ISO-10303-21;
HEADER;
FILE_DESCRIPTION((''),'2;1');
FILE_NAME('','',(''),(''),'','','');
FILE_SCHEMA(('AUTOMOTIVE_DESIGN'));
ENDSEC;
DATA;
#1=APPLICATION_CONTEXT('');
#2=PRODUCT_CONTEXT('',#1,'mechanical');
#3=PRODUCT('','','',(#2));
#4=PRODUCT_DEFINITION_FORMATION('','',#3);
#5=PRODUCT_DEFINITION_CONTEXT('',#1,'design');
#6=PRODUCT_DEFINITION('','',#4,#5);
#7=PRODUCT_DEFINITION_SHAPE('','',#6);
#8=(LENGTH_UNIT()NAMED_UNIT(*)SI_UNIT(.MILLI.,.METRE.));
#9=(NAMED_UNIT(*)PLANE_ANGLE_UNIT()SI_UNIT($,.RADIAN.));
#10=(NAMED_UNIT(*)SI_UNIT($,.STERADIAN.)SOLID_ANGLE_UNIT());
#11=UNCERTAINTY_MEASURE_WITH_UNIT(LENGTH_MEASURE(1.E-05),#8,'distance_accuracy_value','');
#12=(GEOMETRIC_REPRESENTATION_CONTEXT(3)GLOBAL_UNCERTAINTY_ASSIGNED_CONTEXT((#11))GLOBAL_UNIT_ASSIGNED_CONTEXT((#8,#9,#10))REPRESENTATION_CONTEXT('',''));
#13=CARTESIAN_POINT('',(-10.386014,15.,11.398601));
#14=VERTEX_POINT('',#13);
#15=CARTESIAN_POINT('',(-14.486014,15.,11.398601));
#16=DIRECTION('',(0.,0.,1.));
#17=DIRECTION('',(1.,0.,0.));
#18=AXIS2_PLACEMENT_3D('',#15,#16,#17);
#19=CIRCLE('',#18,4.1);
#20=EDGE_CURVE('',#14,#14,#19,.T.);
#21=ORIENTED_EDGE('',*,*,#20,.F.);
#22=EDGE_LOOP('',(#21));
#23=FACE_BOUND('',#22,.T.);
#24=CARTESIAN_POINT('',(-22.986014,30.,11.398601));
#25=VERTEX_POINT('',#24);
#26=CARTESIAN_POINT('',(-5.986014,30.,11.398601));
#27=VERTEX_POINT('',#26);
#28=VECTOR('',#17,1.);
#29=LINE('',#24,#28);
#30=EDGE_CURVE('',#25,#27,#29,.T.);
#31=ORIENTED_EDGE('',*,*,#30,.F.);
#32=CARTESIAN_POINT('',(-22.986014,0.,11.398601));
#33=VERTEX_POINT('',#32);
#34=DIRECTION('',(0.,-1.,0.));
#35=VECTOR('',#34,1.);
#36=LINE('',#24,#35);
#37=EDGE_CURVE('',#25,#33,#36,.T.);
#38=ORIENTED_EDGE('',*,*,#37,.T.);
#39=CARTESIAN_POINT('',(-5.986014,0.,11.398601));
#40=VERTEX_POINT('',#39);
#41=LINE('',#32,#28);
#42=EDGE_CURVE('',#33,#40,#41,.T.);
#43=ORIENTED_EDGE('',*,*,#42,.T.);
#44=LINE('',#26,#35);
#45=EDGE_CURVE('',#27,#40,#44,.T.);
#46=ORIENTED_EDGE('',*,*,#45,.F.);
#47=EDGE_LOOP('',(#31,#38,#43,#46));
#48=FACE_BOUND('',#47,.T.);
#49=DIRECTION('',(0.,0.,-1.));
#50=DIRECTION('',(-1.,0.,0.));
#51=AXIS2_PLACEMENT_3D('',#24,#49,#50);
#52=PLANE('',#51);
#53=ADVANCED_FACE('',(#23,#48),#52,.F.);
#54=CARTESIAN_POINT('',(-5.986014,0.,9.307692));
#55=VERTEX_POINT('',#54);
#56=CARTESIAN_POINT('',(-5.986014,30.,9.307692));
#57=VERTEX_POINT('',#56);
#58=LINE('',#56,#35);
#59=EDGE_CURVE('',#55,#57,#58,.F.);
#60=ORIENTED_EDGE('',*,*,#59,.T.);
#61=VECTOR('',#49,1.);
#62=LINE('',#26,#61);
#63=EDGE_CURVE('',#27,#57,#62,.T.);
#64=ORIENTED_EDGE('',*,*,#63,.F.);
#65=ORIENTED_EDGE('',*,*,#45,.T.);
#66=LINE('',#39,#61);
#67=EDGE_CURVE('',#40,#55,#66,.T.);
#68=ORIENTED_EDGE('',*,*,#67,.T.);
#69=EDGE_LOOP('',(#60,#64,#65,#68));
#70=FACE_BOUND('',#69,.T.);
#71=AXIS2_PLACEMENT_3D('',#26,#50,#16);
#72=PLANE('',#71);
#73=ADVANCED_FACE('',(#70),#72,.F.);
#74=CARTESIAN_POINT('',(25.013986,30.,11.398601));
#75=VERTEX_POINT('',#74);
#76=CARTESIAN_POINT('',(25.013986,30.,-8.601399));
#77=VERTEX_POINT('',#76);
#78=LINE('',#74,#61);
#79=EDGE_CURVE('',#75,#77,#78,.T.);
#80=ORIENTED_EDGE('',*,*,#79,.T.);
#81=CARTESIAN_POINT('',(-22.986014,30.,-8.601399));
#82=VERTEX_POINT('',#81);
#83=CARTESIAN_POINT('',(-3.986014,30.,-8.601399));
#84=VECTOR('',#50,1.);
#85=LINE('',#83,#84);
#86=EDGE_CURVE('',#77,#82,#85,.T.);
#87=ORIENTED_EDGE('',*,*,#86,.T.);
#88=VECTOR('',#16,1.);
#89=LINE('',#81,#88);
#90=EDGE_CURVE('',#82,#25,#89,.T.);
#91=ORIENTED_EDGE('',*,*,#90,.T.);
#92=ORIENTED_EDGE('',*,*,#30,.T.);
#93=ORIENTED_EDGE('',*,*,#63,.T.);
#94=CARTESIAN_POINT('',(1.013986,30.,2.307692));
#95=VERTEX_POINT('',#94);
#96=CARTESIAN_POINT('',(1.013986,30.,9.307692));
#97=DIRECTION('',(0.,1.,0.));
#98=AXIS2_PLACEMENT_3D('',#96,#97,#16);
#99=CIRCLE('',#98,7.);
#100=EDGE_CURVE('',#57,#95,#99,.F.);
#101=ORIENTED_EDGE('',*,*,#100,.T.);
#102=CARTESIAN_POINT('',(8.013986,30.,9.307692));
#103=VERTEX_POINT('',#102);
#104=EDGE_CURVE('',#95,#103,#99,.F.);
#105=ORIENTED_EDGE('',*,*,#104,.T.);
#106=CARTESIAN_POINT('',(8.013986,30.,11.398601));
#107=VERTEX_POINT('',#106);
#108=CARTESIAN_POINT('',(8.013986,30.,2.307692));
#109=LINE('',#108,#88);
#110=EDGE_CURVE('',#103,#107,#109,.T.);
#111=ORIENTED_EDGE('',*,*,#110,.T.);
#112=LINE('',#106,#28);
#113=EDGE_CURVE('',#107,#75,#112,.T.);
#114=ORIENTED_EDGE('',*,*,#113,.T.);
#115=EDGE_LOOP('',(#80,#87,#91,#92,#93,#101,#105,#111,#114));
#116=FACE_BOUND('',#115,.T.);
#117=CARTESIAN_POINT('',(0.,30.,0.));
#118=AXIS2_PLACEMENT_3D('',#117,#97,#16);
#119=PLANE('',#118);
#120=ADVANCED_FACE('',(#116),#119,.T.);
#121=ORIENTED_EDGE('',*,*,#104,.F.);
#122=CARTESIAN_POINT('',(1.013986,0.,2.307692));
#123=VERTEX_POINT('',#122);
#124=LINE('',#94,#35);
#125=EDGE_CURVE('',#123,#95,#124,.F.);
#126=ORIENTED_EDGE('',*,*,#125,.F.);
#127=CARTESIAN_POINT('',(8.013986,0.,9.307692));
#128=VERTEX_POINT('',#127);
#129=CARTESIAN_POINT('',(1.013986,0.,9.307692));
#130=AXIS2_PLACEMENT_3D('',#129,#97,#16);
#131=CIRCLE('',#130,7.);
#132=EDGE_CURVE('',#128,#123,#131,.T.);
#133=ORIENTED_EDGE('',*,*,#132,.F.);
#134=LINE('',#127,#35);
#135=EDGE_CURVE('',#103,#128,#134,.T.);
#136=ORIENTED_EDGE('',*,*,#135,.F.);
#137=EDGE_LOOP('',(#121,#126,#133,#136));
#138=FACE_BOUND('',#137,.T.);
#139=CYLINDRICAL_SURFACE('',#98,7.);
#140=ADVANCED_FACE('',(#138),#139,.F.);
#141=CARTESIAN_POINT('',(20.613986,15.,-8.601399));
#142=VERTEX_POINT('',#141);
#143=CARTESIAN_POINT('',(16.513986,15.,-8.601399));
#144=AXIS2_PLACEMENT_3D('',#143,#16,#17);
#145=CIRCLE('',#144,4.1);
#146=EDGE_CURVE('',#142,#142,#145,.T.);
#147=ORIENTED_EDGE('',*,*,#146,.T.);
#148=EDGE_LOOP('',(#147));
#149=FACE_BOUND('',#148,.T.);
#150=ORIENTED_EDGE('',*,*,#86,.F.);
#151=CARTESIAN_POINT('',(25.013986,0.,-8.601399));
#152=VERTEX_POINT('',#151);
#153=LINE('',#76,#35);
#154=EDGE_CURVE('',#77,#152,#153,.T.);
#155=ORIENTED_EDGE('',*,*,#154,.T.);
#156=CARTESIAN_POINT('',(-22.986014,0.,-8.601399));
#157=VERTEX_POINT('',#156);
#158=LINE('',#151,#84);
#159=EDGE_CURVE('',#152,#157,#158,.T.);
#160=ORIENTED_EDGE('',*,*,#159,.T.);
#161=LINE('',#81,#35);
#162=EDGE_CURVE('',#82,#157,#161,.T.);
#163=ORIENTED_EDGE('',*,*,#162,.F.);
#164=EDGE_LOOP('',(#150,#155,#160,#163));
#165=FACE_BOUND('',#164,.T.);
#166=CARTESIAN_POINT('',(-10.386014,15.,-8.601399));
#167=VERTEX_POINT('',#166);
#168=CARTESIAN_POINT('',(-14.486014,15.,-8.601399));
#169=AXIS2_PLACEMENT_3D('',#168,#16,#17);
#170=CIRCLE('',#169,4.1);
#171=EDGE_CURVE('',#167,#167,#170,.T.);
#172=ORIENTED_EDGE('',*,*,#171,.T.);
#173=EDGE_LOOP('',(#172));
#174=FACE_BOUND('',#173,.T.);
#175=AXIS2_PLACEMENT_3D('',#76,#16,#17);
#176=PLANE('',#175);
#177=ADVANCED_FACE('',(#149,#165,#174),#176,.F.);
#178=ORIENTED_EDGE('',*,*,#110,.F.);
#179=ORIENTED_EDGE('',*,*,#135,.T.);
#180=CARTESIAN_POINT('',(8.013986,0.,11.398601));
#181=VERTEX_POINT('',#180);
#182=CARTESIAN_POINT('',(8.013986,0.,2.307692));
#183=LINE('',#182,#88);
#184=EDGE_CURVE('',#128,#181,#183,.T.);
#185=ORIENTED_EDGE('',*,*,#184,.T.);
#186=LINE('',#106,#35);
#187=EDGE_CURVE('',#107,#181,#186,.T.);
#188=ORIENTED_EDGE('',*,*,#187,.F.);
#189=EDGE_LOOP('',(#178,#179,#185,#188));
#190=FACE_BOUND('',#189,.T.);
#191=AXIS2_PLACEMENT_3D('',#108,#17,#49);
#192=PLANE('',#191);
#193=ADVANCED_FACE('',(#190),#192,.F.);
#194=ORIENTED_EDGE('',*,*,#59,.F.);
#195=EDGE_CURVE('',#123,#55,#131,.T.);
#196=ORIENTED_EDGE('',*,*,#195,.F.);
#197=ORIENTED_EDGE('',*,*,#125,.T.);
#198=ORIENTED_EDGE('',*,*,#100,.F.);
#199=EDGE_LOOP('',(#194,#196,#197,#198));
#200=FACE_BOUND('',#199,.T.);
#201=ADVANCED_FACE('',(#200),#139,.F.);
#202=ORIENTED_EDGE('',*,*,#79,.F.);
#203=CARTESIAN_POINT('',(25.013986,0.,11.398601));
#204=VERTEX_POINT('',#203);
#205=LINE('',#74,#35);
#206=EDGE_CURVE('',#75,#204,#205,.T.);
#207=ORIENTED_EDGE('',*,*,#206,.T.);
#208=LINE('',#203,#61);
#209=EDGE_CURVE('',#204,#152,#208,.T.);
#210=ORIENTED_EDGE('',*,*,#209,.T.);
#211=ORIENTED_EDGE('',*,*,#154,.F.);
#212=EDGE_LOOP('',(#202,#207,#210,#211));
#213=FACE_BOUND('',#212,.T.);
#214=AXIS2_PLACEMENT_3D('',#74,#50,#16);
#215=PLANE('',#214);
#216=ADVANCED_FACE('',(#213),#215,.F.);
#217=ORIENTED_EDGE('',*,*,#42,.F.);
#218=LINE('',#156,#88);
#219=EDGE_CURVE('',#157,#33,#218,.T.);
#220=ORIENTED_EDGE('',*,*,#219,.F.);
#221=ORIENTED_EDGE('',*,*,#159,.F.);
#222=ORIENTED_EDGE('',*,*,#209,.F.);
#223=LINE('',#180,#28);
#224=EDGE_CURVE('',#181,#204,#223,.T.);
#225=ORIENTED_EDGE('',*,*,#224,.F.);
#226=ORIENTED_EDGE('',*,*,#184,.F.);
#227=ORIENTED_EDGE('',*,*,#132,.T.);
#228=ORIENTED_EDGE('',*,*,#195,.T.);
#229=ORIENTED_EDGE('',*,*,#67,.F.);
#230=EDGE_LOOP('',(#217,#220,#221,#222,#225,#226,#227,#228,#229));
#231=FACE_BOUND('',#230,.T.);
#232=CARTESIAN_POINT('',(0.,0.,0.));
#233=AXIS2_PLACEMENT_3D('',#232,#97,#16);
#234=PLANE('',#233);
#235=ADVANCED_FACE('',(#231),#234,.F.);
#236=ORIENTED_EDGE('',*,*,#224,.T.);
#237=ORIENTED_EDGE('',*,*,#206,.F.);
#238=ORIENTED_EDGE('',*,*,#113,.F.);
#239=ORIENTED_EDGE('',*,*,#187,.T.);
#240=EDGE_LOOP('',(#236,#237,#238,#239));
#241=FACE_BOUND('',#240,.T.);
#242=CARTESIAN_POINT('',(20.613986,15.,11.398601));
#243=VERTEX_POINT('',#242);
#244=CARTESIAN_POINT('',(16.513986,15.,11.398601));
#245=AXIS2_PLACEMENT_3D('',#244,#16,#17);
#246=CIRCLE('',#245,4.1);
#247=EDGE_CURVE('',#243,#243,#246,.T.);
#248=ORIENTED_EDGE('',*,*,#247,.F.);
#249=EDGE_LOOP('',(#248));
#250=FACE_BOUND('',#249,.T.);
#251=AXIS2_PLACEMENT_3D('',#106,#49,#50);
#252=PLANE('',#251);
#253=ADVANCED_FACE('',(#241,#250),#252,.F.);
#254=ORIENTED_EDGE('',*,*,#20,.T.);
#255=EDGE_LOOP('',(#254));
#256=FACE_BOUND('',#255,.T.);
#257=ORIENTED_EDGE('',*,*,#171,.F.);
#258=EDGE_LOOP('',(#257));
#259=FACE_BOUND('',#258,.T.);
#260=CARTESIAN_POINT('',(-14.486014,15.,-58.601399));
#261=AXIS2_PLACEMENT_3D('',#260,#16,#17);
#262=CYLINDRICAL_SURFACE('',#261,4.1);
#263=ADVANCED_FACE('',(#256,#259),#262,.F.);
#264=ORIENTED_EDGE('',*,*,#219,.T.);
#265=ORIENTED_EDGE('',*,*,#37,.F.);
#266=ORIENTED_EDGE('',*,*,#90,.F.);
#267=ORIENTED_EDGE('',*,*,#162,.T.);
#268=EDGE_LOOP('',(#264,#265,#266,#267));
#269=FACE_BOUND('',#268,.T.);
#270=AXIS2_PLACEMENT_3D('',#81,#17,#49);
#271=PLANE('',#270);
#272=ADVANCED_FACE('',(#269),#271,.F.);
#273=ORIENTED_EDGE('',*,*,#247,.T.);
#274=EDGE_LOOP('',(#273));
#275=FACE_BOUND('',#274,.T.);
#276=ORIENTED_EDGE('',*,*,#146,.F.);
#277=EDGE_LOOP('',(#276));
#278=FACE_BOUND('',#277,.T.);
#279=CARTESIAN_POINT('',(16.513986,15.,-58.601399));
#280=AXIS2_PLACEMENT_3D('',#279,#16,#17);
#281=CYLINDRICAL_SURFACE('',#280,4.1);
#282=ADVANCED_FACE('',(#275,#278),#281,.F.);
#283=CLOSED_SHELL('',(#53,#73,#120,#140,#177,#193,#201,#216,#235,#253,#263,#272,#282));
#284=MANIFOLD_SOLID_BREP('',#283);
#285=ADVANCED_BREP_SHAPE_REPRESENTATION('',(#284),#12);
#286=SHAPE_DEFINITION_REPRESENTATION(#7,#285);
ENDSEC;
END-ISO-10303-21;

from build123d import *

# Parameters (mm, degrees)
BOSS_EXTRUDE1_DEPTH = 30
SKETCH3_R           = 4.1
CUT_EXTRUDE1_DEPTH  = 81.160460929
SKETCH4_R           = 4.1
CUT_EXTRUDE2_DEPTH  = 72.938334134
FILLET1_R           = 7
SKETCH6_W           = 10
SKETCH6_H           = 50
CUT_EXTRUDE3_DEPTH  = 71.426013762


with BuildPart() as part:
    # Sketch1 → Boss-Extrude1 (new body)
    with BuildSketch(Plane(origin=(0, 0, 0), x_dir=(1, 0, 0), z_dir=(0, 1, 0))):
        Polygon((-22.986013986, 8.601398601), (-22.986013986, -11.398601399), (-5.986013986, -11.398601399), (-5.986013986, -2.307692308), (8.013986014, -2.307692308), (8.013986014, -11.398601399), (25.013986014, -11.398601399), (25.013986014, 8.601398601), (6.013986014, 8.601398601), (6.013986014, 58.601398601), (-3.986013986, 58.601398601), (-3.986013986, 8.601398601), align=None)
    extrude(amount=BOSS_EXTRUDE1_DEPTH)

    # Sketch3 → Cut-Extrude1 (cut, through all)
    with BuildSketch(Plane.XY.offset(11.398601399)):
        with Locations((-14.486013986, 15)):
            Circle(SKETCH3_R)
        with Locations((16.513986014, 15)):
            Circle(SKETCH3_R)
    extrude(amount=-CUT_EXTRUDE1_DEPTH, mode=Mode.SUBTRACT)

    # Sketch4 → Cut-Extrude2 (cut, through all)
    with BuildSketch(Plane(origin=(6.013986014, 0, 0), x_dir=(0, 0, -1), z_dir=(1, 0, 0))):
        with Locations((28.601398601, 15)):
            Circle(SKETCH4_R)
        with Locations((48.601398601, 15)):
            Circle(SKETCH4_R)
    extrude(amount=-CUT_EXTRUDE2_DEPTH, mode=Mode.SUBTRACT)

    # Fillet1
    fillet1_edges = [part.edges().sort_by_distance(p)[0] for p in [
        (-5.986013986, 15, 2.307692308),
        (8.013986014, 15, 2.307692308),
    ]]
    fillet(fillet1_edges, radius=FILLET1_R - 0.0001)  # a hair under: the kernel refuses the full size

    # Sketch6 → Cut-Extrude3 (cut, through all)
    with BuildSketch(Plane(origin=(0, 30, 0), x_dir=(1, 0, 0), z_dir=(0, 1, 0))):
        with Locations((1.013986014, 33.601398601)):
            Rectangle(SKETCH6_W, SKETCH6_H)
    extrude(amount=-CUT_EXTRUDE3_DEPTH, mode=Mode.SUBTRACT)


solid = part.part
